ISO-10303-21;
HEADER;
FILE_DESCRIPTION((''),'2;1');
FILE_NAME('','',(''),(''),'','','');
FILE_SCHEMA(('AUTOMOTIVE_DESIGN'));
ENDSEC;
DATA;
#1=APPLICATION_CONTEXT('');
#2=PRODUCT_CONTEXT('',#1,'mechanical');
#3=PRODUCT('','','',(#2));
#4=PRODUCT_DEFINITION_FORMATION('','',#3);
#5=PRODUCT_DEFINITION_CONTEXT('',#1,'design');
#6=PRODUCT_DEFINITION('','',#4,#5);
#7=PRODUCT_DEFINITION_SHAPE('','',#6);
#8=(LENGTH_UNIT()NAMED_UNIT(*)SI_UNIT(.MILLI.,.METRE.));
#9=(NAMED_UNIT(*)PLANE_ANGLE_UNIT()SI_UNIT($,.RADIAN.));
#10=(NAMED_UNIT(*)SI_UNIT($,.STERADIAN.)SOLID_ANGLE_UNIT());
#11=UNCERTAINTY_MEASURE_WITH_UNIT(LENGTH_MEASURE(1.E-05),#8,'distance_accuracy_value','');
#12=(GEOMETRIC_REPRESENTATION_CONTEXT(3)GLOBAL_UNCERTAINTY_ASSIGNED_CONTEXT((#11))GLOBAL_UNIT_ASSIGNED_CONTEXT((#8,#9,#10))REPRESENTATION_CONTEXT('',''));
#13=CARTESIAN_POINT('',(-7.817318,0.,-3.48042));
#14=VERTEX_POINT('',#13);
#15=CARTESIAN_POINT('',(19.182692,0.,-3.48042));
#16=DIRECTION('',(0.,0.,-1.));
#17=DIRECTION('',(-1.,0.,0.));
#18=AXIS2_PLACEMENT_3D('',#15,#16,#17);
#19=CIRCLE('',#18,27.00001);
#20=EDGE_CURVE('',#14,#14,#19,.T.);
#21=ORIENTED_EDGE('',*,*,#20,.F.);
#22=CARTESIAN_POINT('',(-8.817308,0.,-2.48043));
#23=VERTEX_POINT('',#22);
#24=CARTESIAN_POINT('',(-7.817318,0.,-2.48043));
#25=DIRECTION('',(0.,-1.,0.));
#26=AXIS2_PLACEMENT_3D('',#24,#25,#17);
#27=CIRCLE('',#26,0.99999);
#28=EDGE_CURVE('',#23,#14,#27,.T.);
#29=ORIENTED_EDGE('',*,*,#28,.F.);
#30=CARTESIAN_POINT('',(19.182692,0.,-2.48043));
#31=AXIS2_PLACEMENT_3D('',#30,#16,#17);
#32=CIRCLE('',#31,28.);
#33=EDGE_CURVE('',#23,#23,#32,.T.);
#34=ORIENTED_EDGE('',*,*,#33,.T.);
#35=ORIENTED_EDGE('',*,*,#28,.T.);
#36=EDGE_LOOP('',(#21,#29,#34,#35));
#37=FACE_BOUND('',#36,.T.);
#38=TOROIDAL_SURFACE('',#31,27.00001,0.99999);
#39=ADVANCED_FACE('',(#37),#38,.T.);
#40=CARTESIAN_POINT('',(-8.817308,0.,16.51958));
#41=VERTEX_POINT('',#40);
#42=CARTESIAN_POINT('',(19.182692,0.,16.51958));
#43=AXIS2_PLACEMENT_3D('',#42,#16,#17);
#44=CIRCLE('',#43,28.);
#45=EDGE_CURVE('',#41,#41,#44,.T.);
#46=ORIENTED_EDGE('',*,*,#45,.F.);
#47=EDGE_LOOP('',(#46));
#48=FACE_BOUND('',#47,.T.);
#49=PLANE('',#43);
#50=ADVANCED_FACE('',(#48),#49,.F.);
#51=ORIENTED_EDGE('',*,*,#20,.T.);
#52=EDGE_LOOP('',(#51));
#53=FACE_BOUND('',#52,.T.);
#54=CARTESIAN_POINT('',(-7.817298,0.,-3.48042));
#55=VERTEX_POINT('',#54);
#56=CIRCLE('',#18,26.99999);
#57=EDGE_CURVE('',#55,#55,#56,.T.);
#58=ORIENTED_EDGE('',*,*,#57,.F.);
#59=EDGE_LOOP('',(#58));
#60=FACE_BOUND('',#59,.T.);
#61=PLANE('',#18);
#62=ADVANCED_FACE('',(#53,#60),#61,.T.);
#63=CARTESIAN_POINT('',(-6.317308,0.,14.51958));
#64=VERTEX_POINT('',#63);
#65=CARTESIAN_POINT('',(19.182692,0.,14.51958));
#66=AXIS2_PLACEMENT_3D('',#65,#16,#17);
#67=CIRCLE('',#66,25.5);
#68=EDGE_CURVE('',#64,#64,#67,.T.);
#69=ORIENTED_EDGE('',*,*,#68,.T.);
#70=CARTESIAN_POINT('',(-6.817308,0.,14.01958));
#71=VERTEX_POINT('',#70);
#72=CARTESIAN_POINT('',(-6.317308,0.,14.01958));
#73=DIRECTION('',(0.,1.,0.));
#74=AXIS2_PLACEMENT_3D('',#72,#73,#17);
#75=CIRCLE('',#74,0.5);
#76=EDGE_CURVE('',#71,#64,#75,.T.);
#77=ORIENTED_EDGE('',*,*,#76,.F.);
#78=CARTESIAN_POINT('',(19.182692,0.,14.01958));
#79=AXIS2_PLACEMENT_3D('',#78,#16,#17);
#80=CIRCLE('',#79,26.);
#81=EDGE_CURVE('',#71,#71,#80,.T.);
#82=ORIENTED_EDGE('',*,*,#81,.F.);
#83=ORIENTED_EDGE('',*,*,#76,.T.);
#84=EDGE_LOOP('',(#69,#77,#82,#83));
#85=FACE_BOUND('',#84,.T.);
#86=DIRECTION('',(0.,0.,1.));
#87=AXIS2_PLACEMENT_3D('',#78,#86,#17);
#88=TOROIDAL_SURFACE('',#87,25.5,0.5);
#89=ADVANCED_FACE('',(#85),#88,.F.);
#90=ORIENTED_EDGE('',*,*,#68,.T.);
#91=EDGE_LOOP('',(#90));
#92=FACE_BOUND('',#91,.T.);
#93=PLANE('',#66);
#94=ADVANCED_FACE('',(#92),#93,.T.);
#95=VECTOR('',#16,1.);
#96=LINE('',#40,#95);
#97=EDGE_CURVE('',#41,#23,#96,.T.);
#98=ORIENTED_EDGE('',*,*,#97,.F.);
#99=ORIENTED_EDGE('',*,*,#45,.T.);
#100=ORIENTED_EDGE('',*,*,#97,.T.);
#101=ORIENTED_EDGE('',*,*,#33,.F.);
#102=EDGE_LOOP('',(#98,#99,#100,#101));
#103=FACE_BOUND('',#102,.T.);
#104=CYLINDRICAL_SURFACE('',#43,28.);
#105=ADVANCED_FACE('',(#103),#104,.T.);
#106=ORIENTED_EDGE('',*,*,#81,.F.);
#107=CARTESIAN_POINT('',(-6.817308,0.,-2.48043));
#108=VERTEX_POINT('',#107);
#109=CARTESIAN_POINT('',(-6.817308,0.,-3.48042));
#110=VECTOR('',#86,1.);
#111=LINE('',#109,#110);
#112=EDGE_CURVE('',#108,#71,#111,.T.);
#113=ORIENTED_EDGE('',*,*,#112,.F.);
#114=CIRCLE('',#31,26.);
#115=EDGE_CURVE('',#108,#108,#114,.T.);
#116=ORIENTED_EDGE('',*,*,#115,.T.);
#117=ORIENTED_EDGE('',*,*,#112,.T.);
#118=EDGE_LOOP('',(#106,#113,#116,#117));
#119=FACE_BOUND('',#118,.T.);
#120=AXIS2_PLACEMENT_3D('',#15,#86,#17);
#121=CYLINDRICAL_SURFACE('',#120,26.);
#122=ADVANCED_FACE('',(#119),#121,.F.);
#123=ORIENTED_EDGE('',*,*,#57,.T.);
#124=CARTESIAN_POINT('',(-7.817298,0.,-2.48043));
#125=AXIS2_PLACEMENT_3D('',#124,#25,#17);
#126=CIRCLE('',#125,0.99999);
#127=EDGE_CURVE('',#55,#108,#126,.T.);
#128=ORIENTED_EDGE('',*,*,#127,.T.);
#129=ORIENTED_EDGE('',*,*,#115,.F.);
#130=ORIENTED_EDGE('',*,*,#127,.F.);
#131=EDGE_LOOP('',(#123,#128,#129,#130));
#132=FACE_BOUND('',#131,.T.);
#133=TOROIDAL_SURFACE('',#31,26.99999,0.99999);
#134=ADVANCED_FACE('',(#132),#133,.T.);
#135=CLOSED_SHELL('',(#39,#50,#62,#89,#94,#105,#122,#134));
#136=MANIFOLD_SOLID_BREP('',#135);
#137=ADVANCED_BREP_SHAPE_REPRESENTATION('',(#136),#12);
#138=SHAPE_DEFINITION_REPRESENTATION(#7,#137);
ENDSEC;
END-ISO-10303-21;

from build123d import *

# Parameters (mm, degrees)
F2_R = 0.99999
F3_R = 0.5


# Not quite as in the source:
# - a fillet or chamfer is up to 0.001 mm smaller than in the source, because OpenCascade refuses the exact size


with BuildPart() as f1:
    # F0 (on Front) → F1 (revolve)
    with BuildSketch(Plane.XZ):
        Polygon((19.1826918498, 16.5195801589), (-8.8173081502, 16.5195801589), (-8.8173081502, -3.4804198411), (-6.8173081502, -3.4804198411), (-6.8173081502, 14.5195801589), (19.1826918498, 14.5195801589), align=None)
    revolve(axis=Axis((19.1826918498, 0, 15.5195801589), (0, 0, -1)))

    # F2 (radius 1 in the source; OpenCascade refuses exactly that, so slightly less here)
    f2_edges = [f1.edges().sort_by_distance(p)[0] for p in [
        (47.182692, 0, -3.48042),
        (45.182692, 0, -3.48042),
    ]]
    fillet(f2_edges, radius=F2_R)

    # F3
    f3_edges = [f1.edges().sort_by_distance(p)[0] for p in [
        (45.182692, 0, 14.51958),
    ]]
    fillet(f3_edges, radius=F3_R)


solid = f1.part
